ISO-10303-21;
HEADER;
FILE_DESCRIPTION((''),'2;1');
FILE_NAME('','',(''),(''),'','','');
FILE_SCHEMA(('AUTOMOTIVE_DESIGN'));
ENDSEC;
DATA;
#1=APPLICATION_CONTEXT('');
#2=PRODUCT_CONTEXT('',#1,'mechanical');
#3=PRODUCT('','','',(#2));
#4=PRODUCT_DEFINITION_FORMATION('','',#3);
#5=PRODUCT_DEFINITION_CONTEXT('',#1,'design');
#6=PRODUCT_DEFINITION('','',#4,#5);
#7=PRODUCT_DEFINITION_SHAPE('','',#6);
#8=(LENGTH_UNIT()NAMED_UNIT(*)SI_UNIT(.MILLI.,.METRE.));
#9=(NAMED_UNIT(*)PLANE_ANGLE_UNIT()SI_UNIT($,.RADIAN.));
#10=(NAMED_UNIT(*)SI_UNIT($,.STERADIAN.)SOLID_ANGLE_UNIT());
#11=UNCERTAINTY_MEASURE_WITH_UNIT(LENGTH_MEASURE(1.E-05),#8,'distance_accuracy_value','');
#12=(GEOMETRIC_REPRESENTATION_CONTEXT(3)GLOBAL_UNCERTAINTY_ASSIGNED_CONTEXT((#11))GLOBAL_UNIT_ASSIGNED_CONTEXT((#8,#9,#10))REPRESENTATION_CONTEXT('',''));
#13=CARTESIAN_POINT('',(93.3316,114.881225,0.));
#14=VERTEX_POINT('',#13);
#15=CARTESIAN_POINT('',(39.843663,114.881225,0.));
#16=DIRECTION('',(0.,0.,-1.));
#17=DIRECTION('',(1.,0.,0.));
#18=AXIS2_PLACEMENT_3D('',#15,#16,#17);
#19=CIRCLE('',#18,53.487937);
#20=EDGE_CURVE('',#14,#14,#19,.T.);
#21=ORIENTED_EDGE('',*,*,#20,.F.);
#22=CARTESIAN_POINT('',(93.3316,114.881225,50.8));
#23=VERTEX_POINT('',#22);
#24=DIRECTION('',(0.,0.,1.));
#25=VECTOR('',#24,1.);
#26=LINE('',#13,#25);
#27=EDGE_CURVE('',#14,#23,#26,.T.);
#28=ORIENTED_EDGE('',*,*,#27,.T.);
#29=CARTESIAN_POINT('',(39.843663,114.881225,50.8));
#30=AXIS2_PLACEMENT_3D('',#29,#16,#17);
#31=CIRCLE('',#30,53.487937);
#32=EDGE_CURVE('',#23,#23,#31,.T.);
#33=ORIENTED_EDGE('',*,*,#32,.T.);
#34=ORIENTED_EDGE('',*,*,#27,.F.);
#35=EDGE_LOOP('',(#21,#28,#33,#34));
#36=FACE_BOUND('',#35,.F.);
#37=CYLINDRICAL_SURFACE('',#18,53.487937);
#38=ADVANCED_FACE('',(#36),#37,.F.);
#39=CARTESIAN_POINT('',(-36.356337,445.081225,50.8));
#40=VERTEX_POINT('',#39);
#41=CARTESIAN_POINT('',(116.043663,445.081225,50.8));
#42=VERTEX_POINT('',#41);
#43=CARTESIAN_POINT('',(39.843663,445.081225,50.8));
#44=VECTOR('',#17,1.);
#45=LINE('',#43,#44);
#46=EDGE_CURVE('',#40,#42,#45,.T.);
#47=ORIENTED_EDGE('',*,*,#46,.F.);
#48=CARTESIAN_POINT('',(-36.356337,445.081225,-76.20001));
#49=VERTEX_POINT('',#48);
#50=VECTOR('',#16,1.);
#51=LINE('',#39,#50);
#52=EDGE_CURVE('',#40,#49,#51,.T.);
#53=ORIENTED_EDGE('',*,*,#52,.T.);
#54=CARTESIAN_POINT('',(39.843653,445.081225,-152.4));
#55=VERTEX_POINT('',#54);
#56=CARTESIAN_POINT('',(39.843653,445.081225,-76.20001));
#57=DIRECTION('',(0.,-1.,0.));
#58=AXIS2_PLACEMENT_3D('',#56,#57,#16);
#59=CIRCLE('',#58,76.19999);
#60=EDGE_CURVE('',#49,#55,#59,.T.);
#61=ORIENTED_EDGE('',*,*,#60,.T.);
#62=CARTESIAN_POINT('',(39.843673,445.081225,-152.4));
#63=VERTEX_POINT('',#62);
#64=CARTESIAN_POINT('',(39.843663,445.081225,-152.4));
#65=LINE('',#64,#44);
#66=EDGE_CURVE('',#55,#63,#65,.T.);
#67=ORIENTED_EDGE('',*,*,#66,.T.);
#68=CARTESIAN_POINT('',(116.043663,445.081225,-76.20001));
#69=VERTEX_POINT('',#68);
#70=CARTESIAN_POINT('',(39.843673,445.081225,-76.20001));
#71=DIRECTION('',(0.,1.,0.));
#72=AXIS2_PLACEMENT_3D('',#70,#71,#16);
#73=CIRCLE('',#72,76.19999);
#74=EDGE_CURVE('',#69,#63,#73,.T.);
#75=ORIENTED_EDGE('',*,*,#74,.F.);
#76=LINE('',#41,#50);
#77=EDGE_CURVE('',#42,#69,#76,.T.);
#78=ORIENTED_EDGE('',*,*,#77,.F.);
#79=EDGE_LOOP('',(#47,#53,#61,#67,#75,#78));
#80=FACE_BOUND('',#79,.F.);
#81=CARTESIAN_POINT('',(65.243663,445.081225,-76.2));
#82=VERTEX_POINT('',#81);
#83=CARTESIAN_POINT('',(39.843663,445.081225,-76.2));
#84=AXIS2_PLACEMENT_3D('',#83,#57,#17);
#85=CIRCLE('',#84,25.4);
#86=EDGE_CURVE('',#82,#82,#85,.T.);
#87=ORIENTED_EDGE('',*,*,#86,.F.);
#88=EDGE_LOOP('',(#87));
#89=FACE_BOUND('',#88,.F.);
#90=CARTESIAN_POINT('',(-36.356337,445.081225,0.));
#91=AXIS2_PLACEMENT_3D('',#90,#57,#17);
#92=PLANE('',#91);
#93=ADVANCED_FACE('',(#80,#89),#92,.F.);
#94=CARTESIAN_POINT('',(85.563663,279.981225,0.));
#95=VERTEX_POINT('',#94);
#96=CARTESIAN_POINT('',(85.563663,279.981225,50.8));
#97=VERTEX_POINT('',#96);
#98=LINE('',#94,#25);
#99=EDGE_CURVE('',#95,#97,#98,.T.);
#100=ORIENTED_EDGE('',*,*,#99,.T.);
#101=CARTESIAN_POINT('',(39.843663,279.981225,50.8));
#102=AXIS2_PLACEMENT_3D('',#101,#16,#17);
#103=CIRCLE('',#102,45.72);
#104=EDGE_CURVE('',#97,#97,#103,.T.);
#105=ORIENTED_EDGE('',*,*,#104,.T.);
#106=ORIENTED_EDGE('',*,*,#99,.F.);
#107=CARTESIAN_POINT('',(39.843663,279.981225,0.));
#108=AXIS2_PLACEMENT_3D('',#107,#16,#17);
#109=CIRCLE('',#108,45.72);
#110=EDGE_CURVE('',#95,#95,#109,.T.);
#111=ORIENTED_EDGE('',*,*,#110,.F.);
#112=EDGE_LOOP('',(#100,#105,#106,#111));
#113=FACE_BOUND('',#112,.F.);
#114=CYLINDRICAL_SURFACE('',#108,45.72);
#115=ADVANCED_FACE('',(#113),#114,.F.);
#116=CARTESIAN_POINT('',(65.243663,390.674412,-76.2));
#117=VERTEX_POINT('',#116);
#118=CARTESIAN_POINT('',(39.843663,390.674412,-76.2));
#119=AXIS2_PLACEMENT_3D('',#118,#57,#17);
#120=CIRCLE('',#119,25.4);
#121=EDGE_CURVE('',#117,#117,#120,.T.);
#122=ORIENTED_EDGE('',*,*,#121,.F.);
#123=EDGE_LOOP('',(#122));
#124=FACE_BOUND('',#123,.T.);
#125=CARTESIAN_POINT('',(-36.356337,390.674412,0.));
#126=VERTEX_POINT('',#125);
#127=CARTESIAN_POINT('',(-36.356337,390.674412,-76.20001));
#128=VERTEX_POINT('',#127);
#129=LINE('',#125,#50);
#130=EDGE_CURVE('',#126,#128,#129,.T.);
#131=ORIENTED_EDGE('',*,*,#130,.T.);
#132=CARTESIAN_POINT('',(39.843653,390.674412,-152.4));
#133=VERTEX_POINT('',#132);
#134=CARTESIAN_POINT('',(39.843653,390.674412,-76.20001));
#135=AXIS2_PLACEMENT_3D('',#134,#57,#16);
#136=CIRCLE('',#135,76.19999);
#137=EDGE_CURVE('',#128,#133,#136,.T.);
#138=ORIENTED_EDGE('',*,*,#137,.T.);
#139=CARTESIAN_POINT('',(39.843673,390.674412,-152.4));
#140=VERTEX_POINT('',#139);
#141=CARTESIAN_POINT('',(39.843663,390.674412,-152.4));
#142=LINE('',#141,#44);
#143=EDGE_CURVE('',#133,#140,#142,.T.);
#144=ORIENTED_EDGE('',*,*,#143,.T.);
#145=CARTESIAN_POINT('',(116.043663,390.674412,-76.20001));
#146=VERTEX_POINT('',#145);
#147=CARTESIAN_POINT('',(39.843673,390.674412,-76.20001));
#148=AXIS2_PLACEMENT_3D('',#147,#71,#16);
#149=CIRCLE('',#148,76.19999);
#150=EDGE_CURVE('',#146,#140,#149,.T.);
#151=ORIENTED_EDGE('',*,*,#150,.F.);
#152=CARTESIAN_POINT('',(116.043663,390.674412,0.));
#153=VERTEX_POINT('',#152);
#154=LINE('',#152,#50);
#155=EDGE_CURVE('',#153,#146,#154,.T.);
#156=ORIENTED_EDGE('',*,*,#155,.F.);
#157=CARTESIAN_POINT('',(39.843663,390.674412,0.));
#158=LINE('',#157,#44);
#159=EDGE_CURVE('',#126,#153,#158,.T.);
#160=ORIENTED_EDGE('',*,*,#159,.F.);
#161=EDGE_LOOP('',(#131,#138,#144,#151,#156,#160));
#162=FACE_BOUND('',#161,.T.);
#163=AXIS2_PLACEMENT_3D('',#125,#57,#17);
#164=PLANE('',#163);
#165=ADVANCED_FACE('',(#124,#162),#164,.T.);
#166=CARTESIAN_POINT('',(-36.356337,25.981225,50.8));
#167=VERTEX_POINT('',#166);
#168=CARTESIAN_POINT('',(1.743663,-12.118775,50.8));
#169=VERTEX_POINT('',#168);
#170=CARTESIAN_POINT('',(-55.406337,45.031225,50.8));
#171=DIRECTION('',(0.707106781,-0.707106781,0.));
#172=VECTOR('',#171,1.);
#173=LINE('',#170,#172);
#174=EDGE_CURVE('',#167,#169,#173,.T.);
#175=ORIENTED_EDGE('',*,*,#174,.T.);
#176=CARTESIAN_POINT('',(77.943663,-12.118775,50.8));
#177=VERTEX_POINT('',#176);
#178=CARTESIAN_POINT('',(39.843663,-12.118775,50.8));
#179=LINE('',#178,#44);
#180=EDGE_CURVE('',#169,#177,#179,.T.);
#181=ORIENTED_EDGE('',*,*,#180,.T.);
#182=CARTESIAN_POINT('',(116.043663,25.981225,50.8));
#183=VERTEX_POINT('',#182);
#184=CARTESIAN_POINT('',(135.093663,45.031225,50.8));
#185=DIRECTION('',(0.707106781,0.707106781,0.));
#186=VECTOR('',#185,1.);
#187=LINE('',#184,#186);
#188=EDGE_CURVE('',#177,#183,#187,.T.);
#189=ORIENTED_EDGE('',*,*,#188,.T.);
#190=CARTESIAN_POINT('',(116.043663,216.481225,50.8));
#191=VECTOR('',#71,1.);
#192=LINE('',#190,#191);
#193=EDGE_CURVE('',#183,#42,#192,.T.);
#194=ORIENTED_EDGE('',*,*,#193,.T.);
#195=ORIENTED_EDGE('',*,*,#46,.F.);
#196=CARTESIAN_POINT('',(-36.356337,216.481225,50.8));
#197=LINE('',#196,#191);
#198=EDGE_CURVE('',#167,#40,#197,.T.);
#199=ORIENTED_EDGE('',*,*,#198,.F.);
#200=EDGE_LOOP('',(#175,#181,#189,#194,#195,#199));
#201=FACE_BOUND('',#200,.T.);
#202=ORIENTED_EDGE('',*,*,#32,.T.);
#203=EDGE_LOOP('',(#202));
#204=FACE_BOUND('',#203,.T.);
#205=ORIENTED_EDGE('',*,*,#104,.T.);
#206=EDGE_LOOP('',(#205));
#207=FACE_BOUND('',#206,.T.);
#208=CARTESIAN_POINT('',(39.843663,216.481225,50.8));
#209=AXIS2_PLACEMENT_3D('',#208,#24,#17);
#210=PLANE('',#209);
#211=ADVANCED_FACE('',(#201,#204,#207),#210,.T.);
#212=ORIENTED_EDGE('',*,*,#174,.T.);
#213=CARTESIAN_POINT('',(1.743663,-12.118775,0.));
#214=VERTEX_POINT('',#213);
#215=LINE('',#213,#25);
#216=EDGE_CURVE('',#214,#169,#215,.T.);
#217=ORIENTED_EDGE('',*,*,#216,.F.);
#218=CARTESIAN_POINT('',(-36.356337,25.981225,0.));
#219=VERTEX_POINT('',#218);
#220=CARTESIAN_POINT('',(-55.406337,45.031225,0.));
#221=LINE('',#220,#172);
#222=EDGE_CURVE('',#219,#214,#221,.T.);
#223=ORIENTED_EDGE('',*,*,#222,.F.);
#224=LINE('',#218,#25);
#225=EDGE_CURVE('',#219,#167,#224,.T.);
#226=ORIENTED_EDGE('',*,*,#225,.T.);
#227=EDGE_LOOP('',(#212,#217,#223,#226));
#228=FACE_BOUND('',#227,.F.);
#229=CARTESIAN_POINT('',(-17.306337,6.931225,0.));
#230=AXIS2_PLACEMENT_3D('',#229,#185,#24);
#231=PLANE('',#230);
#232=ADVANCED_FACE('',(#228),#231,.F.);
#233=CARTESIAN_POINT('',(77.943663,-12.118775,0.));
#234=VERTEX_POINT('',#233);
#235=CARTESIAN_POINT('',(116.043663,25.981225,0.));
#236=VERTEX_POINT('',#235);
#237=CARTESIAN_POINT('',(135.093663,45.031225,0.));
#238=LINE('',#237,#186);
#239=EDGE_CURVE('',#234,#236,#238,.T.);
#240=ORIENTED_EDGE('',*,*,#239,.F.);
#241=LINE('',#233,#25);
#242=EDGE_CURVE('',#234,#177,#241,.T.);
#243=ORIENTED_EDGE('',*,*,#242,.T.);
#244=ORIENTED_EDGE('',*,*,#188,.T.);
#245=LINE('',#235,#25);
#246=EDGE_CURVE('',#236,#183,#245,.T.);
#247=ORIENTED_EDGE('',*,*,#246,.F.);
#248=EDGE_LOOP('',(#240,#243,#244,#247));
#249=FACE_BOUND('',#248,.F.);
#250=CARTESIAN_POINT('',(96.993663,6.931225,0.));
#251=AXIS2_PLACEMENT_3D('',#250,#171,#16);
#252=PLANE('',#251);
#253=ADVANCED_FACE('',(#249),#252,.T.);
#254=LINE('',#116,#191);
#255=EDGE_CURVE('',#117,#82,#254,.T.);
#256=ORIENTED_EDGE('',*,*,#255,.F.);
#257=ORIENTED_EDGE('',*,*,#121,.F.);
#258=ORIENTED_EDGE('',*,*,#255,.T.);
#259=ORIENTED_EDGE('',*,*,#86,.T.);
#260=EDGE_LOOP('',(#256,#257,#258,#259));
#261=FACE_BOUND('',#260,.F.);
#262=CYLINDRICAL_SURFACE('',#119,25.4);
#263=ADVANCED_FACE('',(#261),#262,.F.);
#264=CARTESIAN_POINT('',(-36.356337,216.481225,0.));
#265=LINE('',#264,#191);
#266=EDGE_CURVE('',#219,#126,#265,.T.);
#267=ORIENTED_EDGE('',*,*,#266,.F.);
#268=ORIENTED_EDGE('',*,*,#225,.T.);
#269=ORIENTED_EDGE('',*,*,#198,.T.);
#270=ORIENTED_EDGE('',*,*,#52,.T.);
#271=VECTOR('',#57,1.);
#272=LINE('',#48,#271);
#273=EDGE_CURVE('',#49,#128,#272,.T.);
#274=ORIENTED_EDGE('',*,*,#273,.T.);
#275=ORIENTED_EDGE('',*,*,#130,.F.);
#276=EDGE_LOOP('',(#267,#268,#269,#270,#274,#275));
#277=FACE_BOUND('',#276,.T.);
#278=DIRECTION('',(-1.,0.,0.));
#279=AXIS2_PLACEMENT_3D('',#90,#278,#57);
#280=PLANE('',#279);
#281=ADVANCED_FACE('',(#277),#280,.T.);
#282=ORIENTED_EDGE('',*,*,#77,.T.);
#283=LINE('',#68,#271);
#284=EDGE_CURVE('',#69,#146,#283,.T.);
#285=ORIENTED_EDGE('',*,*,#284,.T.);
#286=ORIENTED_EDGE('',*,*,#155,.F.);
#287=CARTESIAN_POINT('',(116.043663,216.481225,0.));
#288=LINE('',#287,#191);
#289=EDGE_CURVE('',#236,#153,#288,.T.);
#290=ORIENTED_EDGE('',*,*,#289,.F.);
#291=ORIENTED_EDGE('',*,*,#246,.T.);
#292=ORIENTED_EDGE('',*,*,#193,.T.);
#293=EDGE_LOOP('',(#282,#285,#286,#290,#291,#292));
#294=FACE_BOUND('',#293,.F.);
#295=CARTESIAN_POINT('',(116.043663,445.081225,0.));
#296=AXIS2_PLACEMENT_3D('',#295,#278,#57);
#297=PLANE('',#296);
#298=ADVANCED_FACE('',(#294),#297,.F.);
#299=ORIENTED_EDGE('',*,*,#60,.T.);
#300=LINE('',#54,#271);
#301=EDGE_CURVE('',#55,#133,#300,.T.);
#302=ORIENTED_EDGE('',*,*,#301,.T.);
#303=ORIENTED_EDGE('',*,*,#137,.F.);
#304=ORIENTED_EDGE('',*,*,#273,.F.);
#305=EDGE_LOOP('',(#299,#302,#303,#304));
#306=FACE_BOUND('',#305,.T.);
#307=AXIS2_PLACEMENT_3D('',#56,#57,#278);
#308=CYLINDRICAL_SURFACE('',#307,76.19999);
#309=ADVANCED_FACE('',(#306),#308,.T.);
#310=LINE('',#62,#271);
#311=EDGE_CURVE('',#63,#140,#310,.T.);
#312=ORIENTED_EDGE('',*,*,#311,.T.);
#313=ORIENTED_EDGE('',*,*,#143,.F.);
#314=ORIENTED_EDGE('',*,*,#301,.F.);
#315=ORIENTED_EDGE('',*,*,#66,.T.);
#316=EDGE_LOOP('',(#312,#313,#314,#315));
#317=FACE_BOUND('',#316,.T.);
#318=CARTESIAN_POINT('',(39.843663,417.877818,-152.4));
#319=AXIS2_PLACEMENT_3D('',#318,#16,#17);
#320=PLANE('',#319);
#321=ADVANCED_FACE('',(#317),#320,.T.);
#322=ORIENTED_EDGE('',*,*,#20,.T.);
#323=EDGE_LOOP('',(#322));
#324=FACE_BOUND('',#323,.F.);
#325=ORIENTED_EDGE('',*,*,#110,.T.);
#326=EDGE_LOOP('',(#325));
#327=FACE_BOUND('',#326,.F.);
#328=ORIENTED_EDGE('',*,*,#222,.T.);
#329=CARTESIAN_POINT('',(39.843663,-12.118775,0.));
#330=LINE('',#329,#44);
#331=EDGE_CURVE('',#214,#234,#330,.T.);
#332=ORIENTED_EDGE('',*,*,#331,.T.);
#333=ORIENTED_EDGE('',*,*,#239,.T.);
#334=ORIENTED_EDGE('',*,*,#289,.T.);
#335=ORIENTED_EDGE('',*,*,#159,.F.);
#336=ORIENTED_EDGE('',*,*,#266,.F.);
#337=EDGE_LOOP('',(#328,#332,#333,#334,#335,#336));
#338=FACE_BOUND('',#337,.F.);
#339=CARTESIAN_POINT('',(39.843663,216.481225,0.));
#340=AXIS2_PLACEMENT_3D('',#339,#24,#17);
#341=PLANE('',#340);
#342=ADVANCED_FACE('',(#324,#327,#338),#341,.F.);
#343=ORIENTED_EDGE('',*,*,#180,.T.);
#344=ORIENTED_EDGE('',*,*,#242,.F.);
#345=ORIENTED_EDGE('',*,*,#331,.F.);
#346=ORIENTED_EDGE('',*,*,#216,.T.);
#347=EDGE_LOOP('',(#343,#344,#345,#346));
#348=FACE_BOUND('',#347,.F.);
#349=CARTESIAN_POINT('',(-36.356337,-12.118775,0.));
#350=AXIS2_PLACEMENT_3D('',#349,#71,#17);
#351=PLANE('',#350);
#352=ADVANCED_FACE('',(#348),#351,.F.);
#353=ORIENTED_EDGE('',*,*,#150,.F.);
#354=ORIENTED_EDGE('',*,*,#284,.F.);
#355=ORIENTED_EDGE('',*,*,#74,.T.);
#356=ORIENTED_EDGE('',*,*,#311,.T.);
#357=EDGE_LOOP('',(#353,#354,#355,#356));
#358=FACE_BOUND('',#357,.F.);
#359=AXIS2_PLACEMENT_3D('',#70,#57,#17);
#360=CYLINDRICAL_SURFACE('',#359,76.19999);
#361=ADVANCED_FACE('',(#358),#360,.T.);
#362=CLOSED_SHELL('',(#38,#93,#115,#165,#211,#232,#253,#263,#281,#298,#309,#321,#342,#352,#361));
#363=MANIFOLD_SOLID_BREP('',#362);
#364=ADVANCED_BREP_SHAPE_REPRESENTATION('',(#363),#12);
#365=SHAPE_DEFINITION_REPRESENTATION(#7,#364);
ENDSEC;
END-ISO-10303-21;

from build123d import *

# Parameters (mm, degrees)
F0_W     = 152.4
F0_H     = 457.2
F1_DEPTH = 50.8
F2_W     = 152.4
F2_H     = 54.4068123519
F3_DEPTH = 152.4
F4_R     = 76.19999
F5_R     = 45.72
F5_R_2   = 53.4879372825
F6_DEPTH = 50.801
F7_R     = 25.4
F8_DEPTH = 54.4078123519
F9_SIZE  = 38.1


# Not quite as in the source:
# - a fillet or chamfer is up to 0.001 mm smaller than in the source, because OpenCascade refuses the exact size


with BuildPart() as f1:
    # F0 (on Top) → F1 (new body)
    with BuildSketch(Plane.XY):
        with Locations((39.8436626315, 216.4812246025)):
            Rectangle(F0_W, F0_H)
    extrude(amount=F1_DEPTH)

    # F2 (on face) → F3 (join)
    with BuildSketch(Plane(origin=(0, 0, 0), x_dir=(1, 0, 0), z_dir=(0, 0, -1))):
        with Locations((39.8436626315, -417.8778184265)):
            Rectangle(F2_W, F2_H)
    extrude(amount=F3_DEPTH)

    # F4 (radius 76.2 in the source; OpenCascade refuses exactly that, so slightly less here)
    f4_edges = [f1.edges().sort_by_distance(p)[0] for p in [
        (116.043663, 417.877818, -152.4),
        (-36.356337, 417.877818, -152.4),
    ]]
    fillet(f4_edges, radius=F4_R)

    # F5 (on face) → F6 (cut, through all)
    with BuildSketch(Plane(origin=(0, 0, 0), x_dir=(1, 0, 0), z_dir=(0, 0, -1))):
        with Locations((39.8436626315, -279.9812246025)):
            Circle(F5_R)
        with Locations((39.8436626315, -114.8812246025)):
            Circle(F5_R_2)
    extrude(amount=-F6_DEPTH, mode=Mode.SUBTRACT)

    # F7 (on face) → F8 (cut, through all)
    with BuildSketch(Plane.XZ.offset(-390.6744122505)):
        with Locations((39.8436626315, -76.2)):
            Circle(F7_R)
    extrude(amount=-F8_DEPTH, mode=Mode.SUBTRACT)

    # F9
    f9_edges = [f1.edges().sort_by_distance(p)[0] for p in [
        (116.043663, -12.118775, 25.4),
        (-36.356337, -12.118775, 25.4),
    ]]
    chamfer(f9_edges, length=F9_SIZE)


solid = f1.part
